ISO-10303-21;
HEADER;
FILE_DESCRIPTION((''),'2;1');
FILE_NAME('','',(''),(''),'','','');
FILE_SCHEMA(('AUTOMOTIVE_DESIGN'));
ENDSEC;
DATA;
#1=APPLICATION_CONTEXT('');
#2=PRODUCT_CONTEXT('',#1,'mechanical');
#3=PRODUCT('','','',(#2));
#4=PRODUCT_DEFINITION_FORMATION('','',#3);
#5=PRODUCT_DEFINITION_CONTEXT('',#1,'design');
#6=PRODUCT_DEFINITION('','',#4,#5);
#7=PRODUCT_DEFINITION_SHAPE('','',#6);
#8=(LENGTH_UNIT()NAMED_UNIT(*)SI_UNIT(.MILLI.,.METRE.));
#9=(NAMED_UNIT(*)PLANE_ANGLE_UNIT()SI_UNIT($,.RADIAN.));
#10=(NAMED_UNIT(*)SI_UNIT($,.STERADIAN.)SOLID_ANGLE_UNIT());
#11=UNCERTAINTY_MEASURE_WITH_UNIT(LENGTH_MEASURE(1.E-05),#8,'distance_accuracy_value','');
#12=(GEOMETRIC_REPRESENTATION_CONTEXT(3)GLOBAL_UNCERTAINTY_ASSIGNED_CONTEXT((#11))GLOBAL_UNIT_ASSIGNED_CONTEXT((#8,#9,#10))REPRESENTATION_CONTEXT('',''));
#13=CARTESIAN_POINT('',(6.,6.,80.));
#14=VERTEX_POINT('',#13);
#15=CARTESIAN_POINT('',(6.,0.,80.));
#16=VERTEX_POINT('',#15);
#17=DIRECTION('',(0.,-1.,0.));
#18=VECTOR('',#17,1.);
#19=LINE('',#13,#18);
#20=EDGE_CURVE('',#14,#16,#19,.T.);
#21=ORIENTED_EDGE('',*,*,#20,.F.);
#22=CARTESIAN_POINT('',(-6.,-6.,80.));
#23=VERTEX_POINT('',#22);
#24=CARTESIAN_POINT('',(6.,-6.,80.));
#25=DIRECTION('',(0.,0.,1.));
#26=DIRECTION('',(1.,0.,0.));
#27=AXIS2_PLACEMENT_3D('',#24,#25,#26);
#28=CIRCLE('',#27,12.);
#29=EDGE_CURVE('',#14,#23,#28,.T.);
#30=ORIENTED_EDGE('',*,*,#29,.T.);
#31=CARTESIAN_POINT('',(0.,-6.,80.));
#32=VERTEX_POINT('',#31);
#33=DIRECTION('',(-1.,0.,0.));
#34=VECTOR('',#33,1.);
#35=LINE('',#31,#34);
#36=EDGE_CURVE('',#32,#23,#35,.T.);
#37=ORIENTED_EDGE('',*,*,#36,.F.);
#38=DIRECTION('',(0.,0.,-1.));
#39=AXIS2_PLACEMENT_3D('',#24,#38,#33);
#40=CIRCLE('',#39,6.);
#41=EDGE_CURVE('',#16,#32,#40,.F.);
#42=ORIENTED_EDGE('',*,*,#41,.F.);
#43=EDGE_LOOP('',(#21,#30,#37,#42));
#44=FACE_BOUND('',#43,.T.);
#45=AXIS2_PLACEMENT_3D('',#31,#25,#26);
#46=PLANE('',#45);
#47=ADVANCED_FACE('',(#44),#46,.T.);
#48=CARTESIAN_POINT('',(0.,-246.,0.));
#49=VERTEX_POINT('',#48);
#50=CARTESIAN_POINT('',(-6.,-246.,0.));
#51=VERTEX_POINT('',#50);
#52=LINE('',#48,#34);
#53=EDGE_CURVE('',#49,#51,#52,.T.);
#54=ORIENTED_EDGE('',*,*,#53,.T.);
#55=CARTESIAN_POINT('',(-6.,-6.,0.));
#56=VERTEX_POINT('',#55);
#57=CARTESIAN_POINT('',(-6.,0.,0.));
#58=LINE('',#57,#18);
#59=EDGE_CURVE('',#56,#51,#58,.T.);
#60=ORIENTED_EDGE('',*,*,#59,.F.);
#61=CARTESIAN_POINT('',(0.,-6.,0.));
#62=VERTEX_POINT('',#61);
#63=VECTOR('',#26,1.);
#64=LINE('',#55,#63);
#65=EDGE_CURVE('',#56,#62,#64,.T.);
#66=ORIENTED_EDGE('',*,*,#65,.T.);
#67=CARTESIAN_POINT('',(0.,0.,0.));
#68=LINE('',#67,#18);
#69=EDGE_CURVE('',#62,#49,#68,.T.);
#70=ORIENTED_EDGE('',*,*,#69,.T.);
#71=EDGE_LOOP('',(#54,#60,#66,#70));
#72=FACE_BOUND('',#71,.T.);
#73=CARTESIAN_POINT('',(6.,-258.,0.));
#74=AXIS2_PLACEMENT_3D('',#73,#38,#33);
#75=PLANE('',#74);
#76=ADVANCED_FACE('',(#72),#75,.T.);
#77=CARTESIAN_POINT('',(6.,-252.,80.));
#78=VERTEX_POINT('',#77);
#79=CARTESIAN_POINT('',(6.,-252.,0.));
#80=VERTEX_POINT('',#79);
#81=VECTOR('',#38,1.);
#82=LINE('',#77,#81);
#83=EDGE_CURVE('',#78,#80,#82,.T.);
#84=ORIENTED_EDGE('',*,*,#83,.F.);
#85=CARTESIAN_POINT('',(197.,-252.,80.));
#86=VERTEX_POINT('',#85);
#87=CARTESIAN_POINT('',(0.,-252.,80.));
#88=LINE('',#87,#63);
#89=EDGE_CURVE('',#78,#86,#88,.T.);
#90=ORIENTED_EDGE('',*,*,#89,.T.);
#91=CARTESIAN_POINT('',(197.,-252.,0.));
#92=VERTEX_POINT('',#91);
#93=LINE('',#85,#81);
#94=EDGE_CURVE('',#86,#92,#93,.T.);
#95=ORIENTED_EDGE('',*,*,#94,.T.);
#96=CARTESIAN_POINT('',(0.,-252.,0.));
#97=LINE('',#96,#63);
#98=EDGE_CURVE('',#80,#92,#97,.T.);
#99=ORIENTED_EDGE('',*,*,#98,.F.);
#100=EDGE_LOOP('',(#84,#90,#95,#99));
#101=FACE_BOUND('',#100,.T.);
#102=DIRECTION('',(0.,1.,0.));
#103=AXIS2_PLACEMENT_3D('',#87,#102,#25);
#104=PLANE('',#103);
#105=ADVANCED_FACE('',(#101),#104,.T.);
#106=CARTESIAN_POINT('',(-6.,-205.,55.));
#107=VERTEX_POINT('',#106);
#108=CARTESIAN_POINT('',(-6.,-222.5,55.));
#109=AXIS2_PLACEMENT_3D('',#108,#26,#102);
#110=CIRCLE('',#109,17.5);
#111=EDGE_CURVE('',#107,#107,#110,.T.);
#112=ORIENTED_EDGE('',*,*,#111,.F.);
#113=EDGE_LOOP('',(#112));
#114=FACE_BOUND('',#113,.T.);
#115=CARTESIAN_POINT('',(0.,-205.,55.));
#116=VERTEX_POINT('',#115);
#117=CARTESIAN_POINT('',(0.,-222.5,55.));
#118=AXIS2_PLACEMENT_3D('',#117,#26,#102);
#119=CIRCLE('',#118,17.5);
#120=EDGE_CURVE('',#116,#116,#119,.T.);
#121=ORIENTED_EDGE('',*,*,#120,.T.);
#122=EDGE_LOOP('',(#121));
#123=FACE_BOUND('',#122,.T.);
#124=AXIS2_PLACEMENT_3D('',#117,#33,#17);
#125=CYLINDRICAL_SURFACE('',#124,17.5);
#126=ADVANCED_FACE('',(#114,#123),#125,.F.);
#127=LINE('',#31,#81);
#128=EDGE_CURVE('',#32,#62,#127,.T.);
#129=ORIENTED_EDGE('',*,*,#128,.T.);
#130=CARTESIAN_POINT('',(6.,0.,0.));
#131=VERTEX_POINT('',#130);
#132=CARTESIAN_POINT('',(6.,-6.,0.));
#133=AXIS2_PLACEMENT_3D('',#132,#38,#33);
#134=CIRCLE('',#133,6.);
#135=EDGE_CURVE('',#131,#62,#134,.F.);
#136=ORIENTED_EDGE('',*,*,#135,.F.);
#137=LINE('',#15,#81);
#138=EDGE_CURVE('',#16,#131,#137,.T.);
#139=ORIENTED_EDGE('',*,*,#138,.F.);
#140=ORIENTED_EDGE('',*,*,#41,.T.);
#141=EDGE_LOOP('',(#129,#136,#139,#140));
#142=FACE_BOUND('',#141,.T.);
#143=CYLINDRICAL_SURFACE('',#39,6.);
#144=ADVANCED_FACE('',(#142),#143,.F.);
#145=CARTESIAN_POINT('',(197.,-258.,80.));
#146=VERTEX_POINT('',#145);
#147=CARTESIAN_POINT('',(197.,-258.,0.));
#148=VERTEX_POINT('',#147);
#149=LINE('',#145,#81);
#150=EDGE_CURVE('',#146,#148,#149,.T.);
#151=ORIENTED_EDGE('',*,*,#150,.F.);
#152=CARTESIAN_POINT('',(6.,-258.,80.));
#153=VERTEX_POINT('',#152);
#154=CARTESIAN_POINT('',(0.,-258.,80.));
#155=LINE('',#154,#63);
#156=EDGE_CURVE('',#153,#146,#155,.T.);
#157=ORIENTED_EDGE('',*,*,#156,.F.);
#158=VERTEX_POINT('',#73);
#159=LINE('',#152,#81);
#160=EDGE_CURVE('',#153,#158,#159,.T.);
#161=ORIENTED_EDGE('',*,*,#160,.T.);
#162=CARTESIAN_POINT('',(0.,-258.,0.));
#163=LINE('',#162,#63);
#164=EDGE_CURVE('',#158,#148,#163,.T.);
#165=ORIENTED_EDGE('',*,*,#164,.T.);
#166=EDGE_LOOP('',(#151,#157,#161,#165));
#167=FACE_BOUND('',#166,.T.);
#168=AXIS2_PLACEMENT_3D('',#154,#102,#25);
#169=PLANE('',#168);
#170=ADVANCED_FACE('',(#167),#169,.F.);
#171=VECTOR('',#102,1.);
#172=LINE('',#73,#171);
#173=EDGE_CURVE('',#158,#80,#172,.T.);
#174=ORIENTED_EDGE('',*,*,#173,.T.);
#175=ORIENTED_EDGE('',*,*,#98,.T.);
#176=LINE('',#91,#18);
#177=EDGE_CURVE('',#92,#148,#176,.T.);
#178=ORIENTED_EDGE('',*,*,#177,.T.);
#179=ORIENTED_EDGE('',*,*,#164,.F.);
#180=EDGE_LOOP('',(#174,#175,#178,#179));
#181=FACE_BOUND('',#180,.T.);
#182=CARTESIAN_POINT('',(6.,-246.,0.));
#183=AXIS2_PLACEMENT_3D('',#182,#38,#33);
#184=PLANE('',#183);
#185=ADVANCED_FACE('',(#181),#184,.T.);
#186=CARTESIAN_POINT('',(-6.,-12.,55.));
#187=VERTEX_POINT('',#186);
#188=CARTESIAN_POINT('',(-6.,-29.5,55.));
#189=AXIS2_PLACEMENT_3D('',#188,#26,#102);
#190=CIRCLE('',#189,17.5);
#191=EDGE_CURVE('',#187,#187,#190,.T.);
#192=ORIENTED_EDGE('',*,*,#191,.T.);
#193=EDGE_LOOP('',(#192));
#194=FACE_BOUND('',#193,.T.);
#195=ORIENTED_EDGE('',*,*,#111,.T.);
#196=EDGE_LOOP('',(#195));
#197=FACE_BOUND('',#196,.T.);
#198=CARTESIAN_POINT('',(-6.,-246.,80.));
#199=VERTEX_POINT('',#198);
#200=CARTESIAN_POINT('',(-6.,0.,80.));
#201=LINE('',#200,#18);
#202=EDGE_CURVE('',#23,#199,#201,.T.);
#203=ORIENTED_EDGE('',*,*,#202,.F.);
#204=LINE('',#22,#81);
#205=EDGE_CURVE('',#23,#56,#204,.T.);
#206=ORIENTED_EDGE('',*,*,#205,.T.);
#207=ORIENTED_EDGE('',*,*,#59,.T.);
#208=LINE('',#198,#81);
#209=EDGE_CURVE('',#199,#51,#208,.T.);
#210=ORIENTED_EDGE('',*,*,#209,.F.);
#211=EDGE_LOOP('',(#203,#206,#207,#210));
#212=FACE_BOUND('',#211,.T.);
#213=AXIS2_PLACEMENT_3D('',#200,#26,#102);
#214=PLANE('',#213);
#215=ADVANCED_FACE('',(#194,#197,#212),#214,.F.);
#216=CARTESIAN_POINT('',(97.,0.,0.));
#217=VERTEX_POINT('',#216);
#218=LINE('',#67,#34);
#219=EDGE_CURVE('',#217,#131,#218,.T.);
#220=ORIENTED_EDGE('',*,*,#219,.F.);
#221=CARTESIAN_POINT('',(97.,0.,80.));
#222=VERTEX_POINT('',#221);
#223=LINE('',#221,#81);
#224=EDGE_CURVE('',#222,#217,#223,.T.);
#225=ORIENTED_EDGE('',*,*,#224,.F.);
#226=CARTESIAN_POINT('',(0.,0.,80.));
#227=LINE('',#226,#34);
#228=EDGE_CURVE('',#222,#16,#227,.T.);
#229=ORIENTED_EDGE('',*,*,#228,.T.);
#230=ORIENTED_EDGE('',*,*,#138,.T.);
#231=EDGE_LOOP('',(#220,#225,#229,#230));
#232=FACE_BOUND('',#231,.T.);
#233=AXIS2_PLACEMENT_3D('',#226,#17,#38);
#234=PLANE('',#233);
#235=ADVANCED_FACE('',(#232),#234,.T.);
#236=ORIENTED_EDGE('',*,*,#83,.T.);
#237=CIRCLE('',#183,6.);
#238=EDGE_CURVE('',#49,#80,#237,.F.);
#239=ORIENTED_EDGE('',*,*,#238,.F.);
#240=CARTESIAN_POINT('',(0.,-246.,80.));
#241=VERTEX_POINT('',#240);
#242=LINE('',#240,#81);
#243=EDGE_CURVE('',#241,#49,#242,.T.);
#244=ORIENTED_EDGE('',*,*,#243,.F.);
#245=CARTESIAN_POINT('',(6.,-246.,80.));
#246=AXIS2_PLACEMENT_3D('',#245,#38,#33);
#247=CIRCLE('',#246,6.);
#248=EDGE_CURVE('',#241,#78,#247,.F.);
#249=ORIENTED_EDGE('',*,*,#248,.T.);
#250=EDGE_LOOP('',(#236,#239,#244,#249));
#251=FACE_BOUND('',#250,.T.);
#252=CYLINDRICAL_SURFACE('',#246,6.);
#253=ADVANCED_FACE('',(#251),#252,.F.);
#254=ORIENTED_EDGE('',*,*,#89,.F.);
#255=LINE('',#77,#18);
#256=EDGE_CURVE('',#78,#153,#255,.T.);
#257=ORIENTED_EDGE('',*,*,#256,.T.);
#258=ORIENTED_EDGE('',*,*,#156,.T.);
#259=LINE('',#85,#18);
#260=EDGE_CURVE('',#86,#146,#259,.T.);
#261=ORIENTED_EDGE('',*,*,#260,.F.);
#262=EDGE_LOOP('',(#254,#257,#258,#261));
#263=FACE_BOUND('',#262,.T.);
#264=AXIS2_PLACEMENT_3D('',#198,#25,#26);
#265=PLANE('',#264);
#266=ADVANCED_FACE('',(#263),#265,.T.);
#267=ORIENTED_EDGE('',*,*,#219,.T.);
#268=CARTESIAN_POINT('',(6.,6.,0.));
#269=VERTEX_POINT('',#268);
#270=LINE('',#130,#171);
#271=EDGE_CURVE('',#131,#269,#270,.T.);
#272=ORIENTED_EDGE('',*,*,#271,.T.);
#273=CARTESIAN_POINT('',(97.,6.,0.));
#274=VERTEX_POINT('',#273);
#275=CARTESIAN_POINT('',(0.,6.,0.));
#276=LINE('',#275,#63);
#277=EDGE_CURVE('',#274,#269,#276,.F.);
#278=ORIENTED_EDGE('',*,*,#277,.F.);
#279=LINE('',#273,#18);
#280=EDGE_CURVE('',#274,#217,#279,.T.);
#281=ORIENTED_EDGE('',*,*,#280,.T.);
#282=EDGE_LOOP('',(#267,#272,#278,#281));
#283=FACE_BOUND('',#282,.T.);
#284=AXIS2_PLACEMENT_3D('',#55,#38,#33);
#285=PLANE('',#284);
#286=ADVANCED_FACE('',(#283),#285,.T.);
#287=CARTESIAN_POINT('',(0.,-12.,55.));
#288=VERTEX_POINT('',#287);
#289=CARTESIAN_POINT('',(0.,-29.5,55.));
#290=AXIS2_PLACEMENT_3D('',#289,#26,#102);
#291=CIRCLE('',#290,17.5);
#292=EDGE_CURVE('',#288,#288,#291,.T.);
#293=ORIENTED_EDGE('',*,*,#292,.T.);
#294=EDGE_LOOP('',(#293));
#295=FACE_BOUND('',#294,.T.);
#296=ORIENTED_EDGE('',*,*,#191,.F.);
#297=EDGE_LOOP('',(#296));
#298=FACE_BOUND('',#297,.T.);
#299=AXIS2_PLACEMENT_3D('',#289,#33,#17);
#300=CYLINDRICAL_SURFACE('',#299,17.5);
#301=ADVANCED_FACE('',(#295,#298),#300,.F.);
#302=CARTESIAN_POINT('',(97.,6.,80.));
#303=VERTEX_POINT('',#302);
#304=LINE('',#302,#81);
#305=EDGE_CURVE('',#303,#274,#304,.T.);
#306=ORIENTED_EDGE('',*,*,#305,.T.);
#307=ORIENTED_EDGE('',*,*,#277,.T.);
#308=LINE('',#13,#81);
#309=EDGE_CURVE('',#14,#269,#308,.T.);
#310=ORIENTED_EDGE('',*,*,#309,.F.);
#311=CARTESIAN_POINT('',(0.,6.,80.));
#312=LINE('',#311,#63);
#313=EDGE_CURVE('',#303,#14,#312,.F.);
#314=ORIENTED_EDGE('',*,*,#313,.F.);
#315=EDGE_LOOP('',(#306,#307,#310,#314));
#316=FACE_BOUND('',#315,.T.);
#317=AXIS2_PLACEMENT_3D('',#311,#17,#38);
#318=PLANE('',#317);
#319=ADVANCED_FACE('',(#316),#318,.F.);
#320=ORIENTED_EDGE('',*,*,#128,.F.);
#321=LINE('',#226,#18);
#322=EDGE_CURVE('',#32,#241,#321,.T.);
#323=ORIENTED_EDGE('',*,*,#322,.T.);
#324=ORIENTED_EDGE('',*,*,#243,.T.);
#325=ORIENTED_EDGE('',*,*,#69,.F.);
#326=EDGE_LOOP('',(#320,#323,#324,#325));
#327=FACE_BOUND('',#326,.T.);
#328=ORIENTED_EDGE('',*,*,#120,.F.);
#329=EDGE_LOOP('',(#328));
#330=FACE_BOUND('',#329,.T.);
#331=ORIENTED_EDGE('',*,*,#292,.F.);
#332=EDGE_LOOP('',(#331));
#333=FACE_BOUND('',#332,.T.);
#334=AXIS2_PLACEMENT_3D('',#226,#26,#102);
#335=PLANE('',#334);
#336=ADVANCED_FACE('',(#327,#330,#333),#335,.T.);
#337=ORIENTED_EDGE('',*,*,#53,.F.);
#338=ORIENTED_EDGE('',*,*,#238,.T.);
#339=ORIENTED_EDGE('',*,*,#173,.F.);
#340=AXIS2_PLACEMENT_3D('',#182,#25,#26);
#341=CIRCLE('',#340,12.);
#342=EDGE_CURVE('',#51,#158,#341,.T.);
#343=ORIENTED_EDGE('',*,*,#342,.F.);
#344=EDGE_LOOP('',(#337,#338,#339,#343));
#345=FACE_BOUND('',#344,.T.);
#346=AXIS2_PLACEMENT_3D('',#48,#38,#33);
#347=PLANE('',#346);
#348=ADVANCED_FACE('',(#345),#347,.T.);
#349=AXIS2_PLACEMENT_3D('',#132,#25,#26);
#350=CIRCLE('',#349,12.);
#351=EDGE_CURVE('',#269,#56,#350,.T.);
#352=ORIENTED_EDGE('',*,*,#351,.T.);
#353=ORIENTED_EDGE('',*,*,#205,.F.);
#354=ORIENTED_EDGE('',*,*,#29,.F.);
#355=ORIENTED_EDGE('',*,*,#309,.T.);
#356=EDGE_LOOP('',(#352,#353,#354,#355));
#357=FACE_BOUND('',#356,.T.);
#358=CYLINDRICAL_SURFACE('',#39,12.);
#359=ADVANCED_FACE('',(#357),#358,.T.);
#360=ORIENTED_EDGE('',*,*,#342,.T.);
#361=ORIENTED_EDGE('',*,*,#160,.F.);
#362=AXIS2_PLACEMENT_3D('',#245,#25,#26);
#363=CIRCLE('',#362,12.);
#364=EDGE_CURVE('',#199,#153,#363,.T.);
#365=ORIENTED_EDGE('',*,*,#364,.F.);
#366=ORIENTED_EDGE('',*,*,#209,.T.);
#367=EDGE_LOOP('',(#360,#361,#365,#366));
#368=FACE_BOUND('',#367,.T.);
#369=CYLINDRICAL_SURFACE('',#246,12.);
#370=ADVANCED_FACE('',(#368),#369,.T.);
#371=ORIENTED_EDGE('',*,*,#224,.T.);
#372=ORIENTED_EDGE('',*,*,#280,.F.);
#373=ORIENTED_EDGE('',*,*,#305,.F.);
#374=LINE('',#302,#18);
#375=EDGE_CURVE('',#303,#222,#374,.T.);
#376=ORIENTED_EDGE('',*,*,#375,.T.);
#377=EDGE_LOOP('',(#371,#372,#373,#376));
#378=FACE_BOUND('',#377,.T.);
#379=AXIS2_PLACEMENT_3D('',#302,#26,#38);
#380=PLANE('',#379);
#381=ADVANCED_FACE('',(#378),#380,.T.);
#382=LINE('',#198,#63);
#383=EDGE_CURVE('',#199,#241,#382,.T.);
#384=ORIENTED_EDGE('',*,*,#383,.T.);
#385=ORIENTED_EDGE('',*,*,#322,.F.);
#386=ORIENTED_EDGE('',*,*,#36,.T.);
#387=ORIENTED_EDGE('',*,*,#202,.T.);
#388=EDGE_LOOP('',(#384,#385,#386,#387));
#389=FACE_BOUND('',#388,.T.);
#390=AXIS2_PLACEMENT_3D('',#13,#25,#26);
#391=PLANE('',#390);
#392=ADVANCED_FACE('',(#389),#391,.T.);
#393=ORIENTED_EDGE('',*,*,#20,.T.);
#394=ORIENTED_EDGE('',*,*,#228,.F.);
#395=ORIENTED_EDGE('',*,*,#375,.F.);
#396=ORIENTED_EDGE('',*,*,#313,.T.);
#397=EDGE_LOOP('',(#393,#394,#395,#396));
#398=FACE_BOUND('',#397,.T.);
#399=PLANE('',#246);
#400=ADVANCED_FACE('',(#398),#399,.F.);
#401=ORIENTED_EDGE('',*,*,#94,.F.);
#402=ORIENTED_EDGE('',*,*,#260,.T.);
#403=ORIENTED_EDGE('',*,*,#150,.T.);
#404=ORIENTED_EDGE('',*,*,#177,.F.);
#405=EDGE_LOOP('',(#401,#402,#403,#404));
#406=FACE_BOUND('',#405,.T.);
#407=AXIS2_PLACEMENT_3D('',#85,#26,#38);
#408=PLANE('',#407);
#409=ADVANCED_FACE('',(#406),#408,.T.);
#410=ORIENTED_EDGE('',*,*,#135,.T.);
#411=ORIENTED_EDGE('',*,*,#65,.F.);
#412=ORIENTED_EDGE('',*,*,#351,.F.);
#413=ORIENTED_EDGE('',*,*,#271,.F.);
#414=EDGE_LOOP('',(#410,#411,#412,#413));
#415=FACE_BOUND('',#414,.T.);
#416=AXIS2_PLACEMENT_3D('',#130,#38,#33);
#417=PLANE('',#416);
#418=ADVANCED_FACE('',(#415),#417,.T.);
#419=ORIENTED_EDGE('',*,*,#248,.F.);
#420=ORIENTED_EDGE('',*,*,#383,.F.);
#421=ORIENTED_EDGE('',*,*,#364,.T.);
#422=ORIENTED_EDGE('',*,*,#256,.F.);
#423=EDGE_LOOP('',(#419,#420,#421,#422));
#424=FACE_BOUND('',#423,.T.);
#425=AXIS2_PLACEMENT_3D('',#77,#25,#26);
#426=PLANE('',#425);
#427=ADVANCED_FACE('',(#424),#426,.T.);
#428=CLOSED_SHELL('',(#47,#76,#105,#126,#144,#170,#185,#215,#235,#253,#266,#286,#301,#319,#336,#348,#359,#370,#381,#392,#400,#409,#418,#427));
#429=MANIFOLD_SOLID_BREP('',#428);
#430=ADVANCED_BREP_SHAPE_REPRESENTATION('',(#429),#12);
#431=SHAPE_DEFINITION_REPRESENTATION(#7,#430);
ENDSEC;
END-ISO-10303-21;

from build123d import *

# Parameters (mm, degrees)
SM_BASE_FLANGE_1_DEPTH = 80
SKETCH_6_R             = 17.5
CUT_EXTRUDE_1_DEPTH    = 10


# Sheet-metal steps are written as plain solids
with BuildPart() as part:
    # Sketch 1 → 基体-法兰1 (new body)
    with BuildSketch(Plane.XY):
        with BuildLine():
            Line((97, 0), (6, 0))
            ThreePointArc((6, 0), (1.757359313, -1.757359313), (0, -6))
            Line((0, -6), (0, -246))
            ThreePointArc((0, -246), (1.757359313, -250.242640687), (6, -252))
            Line((6, -252), (197, -252))
            Line((197, -252), (197, -258))
            Line((197, -258), (6, -258))
            ThreePointArc((6, -258), (-2.485281374, -254.485281374), (-6, -246))
            Line((-6, -246), (-6, -6))
            ThreePointArc((-6, -6), (-2.485281374, 2.485281374), (6, 6))
            Line((6, 6), (97, 6))
            Line((97, 6), (97, 0))
        make_face()
    extrude(amount=SM_BASE_FLANGE_1_DEPTH)

    # 草图6 → 切除-拉伸1 (cut)
    with BuildSketch(Plane(origin=(-6, 0, 0), x_dir=(0, 0, -1), z_dir=(1, 0, 0))):
        with Locations(Location((-55, -29.5, 0), (0, 0, 90))):
            Circle(SKETCH_6_R)
        with Locations(Location((-55, -222.5, 0), (0, 0, 90))):
            Circle(SKETCH_6_R)
    extrude(amount=CUT_EXTRUDE_1_DEPTH, mode=Mode.SUBTRACT)


solid = part.part
